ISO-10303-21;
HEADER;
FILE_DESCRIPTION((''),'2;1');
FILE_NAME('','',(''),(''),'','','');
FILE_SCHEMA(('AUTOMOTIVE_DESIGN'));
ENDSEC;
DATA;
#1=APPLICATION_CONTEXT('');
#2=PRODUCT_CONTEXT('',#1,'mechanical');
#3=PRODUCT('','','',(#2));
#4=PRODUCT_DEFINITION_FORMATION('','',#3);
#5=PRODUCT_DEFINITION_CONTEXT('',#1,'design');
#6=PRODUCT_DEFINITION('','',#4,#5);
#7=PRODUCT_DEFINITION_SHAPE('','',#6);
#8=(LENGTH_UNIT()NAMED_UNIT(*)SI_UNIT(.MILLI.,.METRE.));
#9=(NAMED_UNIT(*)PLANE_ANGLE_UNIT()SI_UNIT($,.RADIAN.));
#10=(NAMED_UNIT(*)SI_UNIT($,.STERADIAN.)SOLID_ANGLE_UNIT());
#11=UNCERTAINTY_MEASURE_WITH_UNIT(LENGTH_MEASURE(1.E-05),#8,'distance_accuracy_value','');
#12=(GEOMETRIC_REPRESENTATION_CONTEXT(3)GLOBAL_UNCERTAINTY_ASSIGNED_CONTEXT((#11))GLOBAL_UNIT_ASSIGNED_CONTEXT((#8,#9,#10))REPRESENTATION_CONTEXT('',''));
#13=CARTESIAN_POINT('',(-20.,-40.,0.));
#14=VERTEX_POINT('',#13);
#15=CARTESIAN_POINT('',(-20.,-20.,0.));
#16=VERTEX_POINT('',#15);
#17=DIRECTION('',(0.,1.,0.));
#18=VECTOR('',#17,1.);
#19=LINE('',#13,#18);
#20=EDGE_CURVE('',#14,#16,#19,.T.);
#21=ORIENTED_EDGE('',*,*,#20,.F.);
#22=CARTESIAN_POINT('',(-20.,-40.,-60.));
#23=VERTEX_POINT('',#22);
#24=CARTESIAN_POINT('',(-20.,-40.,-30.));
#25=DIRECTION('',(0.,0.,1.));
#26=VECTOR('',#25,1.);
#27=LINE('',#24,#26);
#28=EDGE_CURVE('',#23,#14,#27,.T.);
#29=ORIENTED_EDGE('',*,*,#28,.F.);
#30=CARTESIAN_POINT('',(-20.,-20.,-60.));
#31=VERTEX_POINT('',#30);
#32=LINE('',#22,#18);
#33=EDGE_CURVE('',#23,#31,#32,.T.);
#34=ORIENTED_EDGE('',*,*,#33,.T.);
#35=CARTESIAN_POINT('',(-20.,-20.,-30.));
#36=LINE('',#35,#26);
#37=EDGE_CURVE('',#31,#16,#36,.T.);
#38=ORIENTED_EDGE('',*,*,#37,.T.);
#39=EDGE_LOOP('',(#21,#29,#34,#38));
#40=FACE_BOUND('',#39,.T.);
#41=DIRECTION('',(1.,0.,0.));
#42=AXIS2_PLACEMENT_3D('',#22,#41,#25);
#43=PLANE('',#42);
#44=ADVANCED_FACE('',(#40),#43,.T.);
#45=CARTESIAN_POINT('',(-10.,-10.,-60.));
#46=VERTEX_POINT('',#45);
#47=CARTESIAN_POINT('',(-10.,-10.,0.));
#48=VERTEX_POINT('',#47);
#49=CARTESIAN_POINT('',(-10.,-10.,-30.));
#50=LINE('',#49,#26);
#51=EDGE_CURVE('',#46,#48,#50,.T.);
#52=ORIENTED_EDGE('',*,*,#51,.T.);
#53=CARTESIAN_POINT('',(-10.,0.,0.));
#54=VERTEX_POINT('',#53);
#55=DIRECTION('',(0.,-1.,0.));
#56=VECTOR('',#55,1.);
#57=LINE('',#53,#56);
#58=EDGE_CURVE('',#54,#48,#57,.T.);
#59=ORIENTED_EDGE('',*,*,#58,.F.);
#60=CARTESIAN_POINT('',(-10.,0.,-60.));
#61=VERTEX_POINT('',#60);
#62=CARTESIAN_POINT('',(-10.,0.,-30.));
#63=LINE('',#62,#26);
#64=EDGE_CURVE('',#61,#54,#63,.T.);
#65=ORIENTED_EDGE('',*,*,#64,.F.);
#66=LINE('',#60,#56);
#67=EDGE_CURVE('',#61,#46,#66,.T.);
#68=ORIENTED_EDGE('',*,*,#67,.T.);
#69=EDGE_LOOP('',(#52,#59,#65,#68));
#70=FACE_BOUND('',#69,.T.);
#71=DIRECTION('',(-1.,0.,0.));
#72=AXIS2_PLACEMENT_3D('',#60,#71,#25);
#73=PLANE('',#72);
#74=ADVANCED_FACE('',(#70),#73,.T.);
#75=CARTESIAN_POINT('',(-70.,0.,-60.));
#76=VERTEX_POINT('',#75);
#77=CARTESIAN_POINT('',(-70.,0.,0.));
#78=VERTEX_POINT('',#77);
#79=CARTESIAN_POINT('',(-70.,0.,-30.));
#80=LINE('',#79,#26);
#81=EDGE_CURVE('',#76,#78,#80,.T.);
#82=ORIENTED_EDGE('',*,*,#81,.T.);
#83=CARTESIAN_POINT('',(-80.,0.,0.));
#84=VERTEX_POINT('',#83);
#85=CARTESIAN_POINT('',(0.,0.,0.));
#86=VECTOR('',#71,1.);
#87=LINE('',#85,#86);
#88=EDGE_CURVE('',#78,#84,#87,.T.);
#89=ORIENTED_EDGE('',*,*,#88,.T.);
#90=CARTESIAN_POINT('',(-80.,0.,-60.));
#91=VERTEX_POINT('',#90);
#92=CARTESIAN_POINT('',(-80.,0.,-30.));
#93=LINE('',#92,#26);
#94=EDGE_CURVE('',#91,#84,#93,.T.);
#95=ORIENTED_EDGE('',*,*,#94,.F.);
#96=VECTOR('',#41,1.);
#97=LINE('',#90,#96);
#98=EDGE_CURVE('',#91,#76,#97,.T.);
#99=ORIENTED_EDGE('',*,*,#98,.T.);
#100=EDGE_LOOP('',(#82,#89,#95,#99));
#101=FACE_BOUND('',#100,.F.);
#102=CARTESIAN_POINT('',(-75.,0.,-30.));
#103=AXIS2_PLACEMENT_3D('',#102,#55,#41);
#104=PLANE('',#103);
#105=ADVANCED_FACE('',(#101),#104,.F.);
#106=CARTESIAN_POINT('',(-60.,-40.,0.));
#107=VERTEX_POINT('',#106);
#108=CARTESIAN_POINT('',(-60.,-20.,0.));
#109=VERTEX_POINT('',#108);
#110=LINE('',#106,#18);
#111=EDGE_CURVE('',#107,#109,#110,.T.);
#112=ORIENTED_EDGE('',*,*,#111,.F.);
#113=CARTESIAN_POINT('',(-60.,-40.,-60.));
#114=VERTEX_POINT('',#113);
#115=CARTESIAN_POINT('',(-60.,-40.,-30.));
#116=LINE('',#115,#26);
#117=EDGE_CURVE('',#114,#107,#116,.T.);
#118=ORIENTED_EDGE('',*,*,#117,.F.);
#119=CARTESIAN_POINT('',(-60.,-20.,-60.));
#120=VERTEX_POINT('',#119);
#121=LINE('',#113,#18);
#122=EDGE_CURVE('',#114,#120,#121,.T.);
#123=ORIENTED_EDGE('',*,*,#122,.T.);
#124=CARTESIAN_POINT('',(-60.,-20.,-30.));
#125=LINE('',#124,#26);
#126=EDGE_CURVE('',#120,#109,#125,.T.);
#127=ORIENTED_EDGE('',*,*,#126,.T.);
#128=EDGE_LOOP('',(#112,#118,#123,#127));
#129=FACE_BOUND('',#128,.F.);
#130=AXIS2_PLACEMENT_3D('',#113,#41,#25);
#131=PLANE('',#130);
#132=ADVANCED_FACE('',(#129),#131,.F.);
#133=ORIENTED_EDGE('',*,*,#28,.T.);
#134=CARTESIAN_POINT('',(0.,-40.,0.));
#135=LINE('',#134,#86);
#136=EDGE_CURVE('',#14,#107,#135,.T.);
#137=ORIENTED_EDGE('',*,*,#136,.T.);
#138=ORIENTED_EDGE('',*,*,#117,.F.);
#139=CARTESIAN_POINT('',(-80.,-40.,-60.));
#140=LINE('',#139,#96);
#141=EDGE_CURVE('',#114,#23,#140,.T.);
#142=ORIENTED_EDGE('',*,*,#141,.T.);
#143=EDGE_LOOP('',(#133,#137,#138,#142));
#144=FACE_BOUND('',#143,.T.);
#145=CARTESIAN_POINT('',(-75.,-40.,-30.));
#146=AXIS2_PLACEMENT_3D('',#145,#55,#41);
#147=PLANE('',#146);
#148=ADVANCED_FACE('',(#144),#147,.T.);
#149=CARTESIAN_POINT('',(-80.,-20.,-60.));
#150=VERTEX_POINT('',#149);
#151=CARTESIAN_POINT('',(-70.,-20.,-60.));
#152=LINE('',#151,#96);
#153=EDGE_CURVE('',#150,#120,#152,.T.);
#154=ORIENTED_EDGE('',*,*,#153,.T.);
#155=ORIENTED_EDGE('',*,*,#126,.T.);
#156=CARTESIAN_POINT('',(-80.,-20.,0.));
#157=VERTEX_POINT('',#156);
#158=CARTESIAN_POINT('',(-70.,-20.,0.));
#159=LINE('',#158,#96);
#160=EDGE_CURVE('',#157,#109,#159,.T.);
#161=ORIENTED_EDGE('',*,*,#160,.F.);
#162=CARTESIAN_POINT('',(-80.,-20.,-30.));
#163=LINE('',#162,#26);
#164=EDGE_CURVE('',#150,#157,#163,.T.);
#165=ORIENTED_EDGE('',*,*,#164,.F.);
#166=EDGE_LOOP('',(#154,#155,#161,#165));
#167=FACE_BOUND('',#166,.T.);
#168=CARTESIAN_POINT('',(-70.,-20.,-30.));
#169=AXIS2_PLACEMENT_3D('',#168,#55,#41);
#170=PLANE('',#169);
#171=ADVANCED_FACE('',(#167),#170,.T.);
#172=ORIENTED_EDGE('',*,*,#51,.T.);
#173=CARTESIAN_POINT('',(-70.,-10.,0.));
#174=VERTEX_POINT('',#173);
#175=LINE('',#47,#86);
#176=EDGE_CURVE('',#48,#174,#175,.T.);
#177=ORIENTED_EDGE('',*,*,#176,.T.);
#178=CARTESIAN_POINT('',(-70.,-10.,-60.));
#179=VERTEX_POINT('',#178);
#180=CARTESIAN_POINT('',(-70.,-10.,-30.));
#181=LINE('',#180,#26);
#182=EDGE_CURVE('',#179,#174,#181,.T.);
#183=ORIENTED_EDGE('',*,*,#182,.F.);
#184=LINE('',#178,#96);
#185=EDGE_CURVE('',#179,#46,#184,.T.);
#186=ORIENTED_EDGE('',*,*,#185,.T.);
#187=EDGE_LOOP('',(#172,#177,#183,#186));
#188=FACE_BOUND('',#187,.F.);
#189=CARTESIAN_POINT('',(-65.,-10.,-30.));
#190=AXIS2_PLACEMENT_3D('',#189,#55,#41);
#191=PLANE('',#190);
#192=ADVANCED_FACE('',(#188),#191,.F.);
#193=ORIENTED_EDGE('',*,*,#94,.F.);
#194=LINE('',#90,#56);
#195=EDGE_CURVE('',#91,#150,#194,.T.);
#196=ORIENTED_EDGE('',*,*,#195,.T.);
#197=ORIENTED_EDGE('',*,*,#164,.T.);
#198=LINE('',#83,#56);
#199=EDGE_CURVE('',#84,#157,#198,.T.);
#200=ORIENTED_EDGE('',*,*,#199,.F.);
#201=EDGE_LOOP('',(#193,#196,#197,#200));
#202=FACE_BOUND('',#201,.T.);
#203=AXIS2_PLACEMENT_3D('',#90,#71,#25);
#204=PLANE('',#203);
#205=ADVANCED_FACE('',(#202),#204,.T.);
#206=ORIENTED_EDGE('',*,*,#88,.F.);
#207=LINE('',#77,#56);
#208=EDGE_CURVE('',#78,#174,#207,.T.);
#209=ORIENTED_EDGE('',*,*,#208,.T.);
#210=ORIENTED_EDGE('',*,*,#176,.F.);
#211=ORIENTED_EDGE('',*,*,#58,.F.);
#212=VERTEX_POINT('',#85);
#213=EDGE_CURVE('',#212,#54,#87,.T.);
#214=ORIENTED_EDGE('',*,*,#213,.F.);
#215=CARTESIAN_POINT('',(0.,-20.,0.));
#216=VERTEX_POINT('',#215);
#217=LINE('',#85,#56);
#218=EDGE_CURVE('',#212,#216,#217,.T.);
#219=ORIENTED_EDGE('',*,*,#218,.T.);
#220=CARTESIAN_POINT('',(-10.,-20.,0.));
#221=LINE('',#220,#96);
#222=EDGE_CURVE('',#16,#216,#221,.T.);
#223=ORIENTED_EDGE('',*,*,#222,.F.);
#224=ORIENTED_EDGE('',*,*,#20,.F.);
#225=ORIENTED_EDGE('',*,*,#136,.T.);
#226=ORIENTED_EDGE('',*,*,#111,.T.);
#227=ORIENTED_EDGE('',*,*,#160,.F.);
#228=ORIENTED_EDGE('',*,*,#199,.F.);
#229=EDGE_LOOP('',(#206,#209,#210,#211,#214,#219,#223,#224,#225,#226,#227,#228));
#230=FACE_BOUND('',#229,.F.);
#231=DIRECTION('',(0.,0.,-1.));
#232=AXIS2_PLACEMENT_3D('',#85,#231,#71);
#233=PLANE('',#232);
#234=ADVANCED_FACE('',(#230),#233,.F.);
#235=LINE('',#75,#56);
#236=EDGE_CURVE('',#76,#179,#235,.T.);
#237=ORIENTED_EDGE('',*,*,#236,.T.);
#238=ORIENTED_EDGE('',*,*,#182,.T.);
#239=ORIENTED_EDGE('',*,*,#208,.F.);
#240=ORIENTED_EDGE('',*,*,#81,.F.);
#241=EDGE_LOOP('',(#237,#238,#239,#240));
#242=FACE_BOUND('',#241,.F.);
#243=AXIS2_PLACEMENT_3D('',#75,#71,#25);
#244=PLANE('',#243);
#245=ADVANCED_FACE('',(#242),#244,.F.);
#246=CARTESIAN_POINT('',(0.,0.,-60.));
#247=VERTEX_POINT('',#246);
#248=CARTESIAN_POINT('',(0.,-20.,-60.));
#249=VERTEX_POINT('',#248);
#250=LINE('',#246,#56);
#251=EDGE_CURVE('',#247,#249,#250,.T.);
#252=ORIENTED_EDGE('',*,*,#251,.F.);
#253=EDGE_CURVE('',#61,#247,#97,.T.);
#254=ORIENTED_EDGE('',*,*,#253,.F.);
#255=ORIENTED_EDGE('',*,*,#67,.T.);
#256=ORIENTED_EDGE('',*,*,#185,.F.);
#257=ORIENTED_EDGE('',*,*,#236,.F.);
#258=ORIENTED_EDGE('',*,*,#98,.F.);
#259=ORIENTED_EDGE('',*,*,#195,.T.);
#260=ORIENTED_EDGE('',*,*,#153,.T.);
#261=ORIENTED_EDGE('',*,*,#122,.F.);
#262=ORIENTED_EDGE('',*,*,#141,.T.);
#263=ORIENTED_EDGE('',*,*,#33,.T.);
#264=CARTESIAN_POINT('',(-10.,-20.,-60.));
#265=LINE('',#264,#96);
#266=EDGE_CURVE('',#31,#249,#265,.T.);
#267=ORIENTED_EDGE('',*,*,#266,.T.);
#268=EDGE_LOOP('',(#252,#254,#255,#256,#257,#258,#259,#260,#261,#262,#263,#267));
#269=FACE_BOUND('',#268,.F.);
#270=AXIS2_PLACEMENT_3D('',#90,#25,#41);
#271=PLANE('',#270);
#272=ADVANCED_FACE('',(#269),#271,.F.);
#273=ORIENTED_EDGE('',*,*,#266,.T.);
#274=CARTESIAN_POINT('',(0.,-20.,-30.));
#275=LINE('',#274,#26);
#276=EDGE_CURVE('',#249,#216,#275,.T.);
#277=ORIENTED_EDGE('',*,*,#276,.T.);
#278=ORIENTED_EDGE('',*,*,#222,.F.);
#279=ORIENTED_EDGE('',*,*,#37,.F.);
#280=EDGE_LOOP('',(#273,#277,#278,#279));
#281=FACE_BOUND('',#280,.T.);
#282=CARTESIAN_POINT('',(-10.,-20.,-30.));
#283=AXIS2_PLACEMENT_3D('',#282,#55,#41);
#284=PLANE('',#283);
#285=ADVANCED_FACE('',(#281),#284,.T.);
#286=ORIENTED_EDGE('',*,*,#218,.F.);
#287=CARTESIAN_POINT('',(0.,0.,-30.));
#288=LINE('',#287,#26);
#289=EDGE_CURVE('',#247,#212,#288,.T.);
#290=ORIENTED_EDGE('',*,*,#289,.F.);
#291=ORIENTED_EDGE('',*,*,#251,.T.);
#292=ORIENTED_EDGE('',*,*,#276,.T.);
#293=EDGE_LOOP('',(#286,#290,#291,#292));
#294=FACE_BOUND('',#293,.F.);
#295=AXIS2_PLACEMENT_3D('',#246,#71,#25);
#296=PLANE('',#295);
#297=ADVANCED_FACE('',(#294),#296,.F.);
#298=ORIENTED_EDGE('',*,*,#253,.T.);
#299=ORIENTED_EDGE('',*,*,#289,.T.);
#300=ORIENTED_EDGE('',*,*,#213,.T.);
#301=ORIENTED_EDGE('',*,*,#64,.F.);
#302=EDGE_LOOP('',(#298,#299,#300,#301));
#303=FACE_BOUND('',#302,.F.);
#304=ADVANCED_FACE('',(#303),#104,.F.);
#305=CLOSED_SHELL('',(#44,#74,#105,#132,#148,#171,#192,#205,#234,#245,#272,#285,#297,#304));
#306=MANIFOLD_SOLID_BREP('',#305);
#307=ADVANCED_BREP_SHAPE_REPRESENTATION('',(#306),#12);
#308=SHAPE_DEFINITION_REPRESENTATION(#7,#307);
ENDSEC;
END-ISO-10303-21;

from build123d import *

# Parameters (mm, degrees)
F0_W     = 10
F0_H     = 60
F1_DEPTH = 40
F2_W     = 20
F2_H     = 60
F3_DEPTH = 20
F4_DEPTH = 10


with BuildPart() as f1:
    # F0 (on Front) → F1 (new body)
    with BuildSketch(Plane.XZ):
        with Locations((-75, -30)):
            Rectangle(F0_W, F0_H)
        with Locations((-65, -30)):
            Rectangle(F0_W, F0_H)
        Polygon((-20, 0), (-60, 0), (-60, -60), (-21.7804121599, -60), (-20, -60), align=None)
        with Locations((-15, -30)):
            Rectangle(F0_W, F0_H)
        with Locations((-5, -30)):
            Rectangle(F0_W, F0_H)
    extrude(amount=F1_DEPTH)

    # F0 (on Front) + F2 (on face) → F3 (cut)
    with BuildSketch(Plane.XZ):
        with Locations((-75, -30)):
            Rectangle(F0_W, F0_H)
        with Locations((-65, -30)):
            Rectangle(F0_W, F0_H)
        Polygon((-20, 0), (-60, 0), (-60, -60), (-21.7804121599, -60), (-20, -60), align=None)
        with Locations((-15, -30)):
            Rectangle(F0_W, F0_H)
        with Locations((-5, -30)):
            Rectangle(F0_W, F0_H)
    with BuildSketch(Plane.XZ.offset(40)):
        with Locations((-70, -30)):
            Rectangle(F2_W, F2_H)
        with Locations((-10, -30)):
            Rectangle(F2_W, F2_H)
    extrude(amount=-F3_DEPTH, mode=Mode.SUBTRACT)

    # F0 (on Front) → F4 (cut)
    with BuildSketch(Plane.XZ):
        with Locations((-65, -30)):
            Rectangle(F0_W, F0_H)
        Polygon((-20, 0), (-60, 0), (-60, -60), (-21.7804121599, -60), (-20, -60), align=None)
        with Locations((-15, -30)):
            Rectangle(F0_W, F0_H)
    extrude(amount=F4_DEPTH, mode=Mode.SUBTRACT)


solid = f1.part
